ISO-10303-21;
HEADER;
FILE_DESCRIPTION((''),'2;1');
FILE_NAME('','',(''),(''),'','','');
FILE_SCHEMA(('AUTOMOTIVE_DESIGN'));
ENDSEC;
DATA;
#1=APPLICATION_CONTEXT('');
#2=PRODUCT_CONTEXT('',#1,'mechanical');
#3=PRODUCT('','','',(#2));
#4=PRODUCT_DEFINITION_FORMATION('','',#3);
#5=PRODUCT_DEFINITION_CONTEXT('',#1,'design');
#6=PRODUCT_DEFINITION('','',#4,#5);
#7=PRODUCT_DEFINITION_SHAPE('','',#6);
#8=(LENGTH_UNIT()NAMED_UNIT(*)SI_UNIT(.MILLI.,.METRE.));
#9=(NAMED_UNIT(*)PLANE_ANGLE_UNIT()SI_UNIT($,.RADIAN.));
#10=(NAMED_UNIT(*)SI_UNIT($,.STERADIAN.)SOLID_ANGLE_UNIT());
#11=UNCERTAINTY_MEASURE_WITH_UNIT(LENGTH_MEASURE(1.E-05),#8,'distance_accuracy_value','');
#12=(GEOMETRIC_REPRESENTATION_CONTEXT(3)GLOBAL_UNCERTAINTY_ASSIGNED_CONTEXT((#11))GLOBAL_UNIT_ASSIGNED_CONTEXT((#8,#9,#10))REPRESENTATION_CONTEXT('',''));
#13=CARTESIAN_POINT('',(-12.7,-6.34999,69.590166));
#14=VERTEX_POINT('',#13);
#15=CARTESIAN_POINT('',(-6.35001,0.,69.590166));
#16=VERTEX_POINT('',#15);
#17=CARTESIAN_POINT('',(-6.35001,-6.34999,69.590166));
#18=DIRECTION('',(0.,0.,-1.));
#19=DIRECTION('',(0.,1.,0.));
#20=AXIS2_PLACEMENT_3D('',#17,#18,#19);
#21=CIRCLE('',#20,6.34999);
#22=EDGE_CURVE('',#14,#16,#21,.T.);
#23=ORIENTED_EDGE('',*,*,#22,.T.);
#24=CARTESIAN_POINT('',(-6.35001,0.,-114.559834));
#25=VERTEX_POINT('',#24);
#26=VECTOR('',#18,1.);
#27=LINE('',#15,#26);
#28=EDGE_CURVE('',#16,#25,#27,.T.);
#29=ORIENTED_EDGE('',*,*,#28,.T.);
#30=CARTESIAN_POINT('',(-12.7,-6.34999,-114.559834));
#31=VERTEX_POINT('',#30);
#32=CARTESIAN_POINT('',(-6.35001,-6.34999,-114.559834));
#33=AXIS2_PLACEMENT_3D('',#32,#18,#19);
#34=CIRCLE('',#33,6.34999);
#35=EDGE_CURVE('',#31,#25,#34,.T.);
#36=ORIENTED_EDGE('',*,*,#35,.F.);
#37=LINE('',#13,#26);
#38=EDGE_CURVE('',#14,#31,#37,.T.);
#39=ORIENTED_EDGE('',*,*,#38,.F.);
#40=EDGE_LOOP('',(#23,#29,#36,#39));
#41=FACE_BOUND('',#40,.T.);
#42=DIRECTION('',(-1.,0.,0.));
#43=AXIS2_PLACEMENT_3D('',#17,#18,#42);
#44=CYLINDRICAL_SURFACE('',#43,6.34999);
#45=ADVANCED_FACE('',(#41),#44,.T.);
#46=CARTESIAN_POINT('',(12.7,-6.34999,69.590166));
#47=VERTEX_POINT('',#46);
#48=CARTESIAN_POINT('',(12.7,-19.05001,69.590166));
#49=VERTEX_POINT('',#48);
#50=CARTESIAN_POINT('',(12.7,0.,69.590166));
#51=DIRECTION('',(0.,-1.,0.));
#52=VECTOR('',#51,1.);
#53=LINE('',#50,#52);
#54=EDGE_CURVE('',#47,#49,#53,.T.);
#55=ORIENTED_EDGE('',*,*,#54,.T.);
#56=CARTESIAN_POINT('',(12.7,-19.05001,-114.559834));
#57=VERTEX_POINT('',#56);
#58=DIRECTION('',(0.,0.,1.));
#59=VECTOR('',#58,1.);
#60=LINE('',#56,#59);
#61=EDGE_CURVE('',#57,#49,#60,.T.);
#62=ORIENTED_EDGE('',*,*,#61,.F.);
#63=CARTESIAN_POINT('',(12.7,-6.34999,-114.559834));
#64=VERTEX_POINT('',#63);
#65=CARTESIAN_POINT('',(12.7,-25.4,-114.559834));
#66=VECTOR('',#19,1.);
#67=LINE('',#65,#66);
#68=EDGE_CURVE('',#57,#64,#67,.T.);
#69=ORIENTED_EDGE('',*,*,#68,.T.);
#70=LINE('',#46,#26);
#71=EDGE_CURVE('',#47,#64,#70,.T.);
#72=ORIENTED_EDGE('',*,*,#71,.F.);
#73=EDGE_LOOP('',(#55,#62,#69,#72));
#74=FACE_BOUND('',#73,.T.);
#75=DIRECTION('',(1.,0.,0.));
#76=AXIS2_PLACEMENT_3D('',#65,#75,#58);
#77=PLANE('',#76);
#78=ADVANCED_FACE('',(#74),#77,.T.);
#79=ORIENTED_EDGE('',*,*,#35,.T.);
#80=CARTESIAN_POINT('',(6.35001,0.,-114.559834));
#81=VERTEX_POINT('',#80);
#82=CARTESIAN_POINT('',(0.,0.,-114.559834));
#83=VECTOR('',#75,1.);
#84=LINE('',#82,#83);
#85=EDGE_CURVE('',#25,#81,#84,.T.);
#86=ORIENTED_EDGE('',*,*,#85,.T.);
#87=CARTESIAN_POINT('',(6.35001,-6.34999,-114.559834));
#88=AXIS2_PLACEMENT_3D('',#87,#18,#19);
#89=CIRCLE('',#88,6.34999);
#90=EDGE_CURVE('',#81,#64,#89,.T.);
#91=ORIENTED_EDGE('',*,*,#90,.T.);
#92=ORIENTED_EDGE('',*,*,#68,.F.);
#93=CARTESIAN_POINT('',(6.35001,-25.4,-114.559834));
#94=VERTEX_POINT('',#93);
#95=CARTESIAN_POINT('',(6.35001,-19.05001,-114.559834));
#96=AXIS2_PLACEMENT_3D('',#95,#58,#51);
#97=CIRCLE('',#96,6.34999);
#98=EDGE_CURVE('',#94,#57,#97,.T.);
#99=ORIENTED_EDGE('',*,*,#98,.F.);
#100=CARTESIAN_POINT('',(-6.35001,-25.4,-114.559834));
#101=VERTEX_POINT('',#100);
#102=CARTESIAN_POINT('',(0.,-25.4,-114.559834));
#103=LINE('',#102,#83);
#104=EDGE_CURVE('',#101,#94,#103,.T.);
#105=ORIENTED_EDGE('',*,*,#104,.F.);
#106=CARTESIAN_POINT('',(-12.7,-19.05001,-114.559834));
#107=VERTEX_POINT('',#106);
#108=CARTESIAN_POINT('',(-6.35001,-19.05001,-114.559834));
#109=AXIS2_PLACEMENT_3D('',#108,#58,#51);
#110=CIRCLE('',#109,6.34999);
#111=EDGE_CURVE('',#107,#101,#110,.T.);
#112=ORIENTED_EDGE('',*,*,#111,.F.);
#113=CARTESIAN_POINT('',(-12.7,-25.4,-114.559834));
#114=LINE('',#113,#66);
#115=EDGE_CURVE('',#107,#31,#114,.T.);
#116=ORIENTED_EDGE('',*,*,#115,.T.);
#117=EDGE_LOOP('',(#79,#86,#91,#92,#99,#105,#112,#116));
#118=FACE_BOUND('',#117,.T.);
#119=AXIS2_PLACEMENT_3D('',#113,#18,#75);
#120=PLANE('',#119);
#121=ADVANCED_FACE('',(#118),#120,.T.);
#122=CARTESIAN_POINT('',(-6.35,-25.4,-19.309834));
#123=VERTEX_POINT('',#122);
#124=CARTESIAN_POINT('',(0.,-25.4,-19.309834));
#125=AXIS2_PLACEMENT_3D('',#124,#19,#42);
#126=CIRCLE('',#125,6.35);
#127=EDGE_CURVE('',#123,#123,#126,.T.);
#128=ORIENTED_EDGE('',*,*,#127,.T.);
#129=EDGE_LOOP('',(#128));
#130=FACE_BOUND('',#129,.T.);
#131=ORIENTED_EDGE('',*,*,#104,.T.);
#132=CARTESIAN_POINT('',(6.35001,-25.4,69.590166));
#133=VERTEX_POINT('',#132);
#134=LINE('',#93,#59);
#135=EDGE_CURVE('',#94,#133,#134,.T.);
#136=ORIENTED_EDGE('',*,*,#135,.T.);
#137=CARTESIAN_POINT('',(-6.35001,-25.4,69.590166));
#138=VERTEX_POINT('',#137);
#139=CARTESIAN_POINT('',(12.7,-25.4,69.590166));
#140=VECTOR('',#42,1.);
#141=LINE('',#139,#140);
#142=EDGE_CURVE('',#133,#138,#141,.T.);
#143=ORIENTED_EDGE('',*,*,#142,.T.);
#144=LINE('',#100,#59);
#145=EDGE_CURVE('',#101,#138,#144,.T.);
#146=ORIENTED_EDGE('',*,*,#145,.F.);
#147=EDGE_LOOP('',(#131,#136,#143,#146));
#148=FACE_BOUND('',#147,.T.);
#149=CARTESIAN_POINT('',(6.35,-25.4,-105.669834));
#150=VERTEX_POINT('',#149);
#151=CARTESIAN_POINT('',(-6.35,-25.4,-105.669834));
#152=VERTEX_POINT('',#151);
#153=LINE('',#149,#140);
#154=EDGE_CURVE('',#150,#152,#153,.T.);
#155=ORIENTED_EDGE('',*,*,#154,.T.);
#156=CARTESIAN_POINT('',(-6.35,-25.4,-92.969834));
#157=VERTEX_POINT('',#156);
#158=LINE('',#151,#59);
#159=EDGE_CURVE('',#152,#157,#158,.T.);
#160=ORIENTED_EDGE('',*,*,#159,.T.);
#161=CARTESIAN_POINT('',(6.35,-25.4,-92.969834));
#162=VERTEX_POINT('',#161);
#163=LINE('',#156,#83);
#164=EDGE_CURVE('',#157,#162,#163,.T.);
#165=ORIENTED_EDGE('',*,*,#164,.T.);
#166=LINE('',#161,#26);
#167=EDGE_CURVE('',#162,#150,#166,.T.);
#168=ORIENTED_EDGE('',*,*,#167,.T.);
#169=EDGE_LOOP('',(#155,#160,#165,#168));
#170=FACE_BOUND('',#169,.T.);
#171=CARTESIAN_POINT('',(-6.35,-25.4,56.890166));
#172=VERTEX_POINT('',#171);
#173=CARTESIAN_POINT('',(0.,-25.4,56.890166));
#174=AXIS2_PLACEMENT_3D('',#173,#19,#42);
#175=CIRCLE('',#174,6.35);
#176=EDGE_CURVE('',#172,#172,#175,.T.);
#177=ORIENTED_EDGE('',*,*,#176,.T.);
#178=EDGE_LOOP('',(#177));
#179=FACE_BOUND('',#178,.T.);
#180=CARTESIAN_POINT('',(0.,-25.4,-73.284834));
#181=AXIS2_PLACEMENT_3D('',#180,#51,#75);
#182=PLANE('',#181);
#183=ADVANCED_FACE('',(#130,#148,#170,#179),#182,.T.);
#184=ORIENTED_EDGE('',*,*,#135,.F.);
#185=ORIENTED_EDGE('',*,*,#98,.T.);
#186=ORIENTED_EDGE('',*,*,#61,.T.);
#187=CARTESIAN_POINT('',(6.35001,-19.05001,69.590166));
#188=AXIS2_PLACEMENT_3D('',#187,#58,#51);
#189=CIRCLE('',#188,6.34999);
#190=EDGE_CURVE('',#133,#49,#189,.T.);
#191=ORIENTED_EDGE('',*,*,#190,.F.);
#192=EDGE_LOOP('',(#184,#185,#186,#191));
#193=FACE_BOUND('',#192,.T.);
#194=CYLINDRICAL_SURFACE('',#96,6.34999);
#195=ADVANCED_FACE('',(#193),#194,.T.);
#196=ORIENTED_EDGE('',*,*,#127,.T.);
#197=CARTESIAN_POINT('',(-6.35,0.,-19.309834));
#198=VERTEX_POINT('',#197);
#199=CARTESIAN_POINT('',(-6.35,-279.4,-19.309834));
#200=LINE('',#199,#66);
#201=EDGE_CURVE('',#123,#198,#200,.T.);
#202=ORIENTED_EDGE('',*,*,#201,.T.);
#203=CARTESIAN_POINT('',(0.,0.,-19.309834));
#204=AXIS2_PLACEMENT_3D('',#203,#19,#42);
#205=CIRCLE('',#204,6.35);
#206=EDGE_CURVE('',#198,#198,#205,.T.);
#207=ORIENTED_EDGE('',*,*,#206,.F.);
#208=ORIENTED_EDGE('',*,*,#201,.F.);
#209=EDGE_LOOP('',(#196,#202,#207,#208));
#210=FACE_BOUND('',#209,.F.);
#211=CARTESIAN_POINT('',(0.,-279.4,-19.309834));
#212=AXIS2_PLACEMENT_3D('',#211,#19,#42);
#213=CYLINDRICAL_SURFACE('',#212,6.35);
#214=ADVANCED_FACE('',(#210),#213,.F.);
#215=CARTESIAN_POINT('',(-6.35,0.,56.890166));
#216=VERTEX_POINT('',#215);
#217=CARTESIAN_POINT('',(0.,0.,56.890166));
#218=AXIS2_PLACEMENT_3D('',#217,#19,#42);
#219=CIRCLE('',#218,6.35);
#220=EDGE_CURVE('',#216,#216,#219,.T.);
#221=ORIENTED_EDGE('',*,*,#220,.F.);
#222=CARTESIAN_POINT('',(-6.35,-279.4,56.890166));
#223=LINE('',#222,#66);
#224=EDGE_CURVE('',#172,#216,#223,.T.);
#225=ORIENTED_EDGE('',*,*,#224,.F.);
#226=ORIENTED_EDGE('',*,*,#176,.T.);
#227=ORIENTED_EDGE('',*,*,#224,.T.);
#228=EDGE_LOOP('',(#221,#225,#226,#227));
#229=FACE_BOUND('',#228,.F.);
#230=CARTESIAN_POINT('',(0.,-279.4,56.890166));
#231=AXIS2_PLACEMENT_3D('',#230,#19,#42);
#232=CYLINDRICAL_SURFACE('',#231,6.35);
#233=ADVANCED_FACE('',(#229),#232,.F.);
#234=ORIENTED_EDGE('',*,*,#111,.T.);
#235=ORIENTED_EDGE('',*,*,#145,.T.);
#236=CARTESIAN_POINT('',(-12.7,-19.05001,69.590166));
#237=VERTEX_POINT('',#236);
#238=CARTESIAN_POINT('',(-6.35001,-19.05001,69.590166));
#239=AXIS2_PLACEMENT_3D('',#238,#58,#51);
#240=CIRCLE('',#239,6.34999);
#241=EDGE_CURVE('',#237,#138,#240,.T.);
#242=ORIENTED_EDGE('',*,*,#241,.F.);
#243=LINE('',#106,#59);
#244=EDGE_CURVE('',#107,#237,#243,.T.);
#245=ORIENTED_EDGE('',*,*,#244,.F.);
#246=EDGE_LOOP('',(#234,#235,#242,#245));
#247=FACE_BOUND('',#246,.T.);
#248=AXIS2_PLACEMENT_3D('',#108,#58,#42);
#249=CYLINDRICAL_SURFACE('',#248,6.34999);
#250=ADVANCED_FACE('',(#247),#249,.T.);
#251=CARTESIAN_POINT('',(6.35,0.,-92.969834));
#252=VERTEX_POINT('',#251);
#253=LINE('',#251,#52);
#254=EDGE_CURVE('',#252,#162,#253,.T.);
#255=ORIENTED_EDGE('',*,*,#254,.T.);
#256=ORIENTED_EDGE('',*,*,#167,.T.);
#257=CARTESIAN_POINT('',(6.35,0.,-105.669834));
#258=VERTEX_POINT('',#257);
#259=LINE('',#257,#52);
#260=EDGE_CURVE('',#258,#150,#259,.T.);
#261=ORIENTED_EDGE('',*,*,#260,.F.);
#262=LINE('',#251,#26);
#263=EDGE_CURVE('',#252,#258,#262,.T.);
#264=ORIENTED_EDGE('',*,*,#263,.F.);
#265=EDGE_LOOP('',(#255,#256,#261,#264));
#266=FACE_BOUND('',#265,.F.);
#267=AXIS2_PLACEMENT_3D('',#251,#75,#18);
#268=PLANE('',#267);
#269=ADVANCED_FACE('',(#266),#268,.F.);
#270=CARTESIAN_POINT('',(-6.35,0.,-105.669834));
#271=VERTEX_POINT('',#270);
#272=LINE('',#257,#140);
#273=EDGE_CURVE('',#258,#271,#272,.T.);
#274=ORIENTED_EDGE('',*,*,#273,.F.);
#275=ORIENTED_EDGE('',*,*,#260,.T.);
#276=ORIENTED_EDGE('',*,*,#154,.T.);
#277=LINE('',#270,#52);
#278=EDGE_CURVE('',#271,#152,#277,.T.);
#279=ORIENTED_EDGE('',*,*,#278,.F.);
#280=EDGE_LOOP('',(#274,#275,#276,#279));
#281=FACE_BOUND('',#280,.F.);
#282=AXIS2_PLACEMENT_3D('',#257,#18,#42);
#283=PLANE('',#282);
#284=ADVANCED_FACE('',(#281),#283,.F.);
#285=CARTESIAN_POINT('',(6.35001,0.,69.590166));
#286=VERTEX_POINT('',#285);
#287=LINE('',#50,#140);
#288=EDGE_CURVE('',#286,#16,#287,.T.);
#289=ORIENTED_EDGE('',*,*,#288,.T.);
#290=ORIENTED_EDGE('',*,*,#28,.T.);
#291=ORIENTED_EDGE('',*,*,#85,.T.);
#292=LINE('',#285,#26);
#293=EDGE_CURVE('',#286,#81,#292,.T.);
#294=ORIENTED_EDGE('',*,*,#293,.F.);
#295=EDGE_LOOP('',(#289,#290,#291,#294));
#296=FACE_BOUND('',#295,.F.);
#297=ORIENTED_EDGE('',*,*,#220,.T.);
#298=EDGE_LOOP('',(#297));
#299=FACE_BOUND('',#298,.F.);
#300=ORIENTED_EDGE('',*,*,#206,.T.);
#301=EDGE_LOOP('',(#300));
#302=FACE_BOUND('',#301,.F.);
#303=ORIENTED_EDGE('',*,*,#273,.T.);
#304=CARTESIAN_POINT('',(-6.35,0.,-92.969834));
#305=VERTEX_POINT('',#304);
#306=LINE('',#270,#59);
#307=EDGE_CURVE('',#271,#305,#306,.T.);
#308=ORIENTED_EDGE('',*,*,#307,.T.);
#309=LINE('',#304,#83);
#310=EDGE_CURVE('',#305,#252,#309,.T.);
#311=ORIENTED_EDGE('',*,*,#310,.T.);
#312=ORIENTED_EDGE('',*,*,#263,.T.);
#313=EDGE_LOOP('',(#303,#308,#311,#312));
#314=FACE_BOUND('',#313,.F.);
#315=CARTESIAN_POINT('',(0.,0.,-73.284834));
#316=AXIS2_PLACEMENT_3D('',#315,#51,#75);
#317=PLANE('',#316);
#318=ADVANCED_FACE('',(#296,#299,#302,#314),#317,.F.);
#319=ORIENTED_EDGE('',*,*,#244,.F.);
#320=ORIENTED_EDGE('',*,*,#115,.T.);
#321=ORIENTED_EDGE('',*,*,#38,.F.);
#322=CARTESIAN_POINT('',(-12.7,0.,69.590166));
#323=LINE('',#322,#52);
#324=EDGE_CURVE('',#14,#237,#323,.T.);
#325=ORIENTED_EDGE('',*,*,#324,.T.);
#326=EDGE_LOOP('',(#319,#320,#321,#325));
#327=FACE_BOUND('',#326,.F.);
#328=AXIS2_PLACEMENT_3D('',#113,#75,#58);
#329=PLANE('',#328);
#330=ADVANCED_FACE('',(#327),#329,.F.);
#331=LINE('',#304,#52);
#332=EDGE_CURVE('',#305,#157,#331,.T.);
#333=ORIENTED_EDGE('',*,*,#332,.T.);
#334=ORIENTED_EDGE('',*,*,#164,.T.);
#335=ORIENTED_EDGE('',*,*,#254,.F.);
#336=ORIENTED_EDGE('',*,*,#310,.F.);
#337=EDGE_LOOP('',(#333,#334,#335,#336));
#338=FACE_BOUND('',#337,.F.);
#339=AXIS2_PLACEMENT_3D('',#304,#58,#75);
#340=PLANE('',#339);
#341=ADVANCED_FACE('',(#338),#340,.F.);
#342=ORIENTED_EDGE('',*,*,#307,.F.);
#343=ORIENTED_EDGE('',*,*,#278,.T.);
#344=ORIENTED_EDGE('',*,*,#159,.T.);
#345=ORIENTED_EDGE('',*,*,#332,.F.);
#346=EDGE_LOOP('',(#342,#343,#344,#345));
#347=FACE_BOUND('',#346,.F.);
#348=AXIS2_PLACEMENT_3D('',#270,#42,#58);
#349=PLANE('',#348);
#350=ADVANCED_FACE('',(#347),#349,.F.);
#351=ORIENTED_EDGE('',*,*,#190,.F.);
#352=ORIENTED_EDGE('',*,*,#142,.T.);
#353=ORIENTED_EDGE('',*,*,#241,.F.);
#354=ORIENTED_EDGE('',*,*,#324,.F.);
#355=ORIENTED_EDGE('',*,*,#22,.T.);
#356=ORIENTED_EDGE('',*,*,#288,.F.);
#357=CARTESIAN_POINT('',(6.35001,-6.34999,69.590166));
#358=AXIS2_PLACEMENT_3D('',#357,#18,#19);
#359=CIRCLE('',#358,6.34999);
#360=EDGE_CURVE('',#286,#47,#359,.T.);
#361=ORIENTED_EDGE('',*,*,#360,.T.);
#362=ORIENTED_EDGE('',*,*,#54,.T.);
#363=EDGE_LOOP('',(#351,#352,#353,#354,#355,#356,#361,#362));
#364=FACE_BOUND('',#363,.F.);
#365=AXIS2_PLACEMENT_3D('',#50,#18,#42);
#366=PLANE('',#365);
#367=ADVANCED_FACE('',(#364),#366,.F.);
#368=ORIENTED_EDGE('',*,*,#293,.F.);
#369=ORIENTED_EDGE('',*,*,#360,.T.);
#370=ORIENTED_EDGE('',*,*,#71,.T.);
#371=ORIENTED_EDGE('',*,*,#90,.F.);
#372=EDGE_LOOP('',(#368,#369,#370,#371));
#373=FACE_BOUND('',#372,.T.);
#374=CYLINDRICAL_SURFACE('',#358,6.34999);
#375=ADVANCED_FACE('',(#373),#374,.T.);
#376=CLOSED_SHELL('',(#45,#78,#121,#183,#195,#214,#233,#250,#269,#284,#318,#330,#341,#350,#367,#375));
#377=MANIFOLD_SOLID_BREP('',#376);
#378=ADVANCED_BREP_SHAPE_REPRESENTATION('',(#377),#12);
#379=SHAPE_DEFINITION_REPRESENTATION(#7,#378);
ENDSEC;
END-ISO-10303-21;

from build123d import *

# Parameters (mm, degrees)
F1_DEPTH = 25.4
F3_D     = 12.7
F3_DEPTH = 254
F3_TIP   = 3.8154649308
F4_W     = 25.4
F4_H     = 82.55
F5_DEPTH = 25.4
F7_DEPTH = 25.4
F8_R     = 6.34999


# Not quite as in the source:
# - a fillet or chamfer is up to 0.001 mm smaller than in the source, because OpenCascade refuses the exact size


with BuildPart() as f1:
    # F0 (on Front) → F1 (new body)
    with BuildSketch(Plane.XZ):
        Polygon((-12.7, -32.0098340811), (0, -32.0098340811), (12.7, -32.0098340811), (12.7, 69.5901659189), (-12.7, 69.5901659189), align=None)
    extrude(amount=F1_DEPTH)

    # F3
    with Locations(Plane.XZ.offset(25.4)):
        with Locations((0, 56.8901659189), (0, -19.3098340811)):
            Hole(F3_D / 2, depth=F3_DEPTH)
            with Locations((0, 0, -(F3_DEPTH + F3_TIP / 2))):  # 118° drill point
                Cone(0, F3_D / 2, F3_TIP, mode=Mode.SUBTRACT)

    # F4 (on face) → F5 (join)
    with BuildSketch(Plane.XZ.offset(25.4)):
        with Locations((0, -73.2848340811)):
            Rectangle(F4_W, F4_H)
    extrude(amount=-F5_DEPTH)

    # F6 (on face) → F7 (cut)
    with BuildSketch(Plane(origin=(0, 0, 0), x_dir=(-1, 0, 0), z_dir=(0, 1, 0))):
        Polygon((0, -105.6698340811), (6.35, -105.6698340811), (6.35, -92.9698340811), (-6.35, -92.9698340811), (-6.35, -105.6698340811), align=None)
    extrude(amount=-F7_DEPTH, mode=Mode.SUBTRACT)

    # F8 (radius 6.35 in the source; OpenCascade refuses exactly that, so slightly less here)
    f8_edges = [f1.edges().sort_by_distance(p)[0] for p in [
        (12.7, 0, -22.484834),
        (-12.7, 0, -22.484834),
        (-12.7, -25.4, -22.484834),
        (12.7, -25.4, -22.484834),
    ]]
    fillet(f8_edges, radius=F8_R)


solid = f1.part
